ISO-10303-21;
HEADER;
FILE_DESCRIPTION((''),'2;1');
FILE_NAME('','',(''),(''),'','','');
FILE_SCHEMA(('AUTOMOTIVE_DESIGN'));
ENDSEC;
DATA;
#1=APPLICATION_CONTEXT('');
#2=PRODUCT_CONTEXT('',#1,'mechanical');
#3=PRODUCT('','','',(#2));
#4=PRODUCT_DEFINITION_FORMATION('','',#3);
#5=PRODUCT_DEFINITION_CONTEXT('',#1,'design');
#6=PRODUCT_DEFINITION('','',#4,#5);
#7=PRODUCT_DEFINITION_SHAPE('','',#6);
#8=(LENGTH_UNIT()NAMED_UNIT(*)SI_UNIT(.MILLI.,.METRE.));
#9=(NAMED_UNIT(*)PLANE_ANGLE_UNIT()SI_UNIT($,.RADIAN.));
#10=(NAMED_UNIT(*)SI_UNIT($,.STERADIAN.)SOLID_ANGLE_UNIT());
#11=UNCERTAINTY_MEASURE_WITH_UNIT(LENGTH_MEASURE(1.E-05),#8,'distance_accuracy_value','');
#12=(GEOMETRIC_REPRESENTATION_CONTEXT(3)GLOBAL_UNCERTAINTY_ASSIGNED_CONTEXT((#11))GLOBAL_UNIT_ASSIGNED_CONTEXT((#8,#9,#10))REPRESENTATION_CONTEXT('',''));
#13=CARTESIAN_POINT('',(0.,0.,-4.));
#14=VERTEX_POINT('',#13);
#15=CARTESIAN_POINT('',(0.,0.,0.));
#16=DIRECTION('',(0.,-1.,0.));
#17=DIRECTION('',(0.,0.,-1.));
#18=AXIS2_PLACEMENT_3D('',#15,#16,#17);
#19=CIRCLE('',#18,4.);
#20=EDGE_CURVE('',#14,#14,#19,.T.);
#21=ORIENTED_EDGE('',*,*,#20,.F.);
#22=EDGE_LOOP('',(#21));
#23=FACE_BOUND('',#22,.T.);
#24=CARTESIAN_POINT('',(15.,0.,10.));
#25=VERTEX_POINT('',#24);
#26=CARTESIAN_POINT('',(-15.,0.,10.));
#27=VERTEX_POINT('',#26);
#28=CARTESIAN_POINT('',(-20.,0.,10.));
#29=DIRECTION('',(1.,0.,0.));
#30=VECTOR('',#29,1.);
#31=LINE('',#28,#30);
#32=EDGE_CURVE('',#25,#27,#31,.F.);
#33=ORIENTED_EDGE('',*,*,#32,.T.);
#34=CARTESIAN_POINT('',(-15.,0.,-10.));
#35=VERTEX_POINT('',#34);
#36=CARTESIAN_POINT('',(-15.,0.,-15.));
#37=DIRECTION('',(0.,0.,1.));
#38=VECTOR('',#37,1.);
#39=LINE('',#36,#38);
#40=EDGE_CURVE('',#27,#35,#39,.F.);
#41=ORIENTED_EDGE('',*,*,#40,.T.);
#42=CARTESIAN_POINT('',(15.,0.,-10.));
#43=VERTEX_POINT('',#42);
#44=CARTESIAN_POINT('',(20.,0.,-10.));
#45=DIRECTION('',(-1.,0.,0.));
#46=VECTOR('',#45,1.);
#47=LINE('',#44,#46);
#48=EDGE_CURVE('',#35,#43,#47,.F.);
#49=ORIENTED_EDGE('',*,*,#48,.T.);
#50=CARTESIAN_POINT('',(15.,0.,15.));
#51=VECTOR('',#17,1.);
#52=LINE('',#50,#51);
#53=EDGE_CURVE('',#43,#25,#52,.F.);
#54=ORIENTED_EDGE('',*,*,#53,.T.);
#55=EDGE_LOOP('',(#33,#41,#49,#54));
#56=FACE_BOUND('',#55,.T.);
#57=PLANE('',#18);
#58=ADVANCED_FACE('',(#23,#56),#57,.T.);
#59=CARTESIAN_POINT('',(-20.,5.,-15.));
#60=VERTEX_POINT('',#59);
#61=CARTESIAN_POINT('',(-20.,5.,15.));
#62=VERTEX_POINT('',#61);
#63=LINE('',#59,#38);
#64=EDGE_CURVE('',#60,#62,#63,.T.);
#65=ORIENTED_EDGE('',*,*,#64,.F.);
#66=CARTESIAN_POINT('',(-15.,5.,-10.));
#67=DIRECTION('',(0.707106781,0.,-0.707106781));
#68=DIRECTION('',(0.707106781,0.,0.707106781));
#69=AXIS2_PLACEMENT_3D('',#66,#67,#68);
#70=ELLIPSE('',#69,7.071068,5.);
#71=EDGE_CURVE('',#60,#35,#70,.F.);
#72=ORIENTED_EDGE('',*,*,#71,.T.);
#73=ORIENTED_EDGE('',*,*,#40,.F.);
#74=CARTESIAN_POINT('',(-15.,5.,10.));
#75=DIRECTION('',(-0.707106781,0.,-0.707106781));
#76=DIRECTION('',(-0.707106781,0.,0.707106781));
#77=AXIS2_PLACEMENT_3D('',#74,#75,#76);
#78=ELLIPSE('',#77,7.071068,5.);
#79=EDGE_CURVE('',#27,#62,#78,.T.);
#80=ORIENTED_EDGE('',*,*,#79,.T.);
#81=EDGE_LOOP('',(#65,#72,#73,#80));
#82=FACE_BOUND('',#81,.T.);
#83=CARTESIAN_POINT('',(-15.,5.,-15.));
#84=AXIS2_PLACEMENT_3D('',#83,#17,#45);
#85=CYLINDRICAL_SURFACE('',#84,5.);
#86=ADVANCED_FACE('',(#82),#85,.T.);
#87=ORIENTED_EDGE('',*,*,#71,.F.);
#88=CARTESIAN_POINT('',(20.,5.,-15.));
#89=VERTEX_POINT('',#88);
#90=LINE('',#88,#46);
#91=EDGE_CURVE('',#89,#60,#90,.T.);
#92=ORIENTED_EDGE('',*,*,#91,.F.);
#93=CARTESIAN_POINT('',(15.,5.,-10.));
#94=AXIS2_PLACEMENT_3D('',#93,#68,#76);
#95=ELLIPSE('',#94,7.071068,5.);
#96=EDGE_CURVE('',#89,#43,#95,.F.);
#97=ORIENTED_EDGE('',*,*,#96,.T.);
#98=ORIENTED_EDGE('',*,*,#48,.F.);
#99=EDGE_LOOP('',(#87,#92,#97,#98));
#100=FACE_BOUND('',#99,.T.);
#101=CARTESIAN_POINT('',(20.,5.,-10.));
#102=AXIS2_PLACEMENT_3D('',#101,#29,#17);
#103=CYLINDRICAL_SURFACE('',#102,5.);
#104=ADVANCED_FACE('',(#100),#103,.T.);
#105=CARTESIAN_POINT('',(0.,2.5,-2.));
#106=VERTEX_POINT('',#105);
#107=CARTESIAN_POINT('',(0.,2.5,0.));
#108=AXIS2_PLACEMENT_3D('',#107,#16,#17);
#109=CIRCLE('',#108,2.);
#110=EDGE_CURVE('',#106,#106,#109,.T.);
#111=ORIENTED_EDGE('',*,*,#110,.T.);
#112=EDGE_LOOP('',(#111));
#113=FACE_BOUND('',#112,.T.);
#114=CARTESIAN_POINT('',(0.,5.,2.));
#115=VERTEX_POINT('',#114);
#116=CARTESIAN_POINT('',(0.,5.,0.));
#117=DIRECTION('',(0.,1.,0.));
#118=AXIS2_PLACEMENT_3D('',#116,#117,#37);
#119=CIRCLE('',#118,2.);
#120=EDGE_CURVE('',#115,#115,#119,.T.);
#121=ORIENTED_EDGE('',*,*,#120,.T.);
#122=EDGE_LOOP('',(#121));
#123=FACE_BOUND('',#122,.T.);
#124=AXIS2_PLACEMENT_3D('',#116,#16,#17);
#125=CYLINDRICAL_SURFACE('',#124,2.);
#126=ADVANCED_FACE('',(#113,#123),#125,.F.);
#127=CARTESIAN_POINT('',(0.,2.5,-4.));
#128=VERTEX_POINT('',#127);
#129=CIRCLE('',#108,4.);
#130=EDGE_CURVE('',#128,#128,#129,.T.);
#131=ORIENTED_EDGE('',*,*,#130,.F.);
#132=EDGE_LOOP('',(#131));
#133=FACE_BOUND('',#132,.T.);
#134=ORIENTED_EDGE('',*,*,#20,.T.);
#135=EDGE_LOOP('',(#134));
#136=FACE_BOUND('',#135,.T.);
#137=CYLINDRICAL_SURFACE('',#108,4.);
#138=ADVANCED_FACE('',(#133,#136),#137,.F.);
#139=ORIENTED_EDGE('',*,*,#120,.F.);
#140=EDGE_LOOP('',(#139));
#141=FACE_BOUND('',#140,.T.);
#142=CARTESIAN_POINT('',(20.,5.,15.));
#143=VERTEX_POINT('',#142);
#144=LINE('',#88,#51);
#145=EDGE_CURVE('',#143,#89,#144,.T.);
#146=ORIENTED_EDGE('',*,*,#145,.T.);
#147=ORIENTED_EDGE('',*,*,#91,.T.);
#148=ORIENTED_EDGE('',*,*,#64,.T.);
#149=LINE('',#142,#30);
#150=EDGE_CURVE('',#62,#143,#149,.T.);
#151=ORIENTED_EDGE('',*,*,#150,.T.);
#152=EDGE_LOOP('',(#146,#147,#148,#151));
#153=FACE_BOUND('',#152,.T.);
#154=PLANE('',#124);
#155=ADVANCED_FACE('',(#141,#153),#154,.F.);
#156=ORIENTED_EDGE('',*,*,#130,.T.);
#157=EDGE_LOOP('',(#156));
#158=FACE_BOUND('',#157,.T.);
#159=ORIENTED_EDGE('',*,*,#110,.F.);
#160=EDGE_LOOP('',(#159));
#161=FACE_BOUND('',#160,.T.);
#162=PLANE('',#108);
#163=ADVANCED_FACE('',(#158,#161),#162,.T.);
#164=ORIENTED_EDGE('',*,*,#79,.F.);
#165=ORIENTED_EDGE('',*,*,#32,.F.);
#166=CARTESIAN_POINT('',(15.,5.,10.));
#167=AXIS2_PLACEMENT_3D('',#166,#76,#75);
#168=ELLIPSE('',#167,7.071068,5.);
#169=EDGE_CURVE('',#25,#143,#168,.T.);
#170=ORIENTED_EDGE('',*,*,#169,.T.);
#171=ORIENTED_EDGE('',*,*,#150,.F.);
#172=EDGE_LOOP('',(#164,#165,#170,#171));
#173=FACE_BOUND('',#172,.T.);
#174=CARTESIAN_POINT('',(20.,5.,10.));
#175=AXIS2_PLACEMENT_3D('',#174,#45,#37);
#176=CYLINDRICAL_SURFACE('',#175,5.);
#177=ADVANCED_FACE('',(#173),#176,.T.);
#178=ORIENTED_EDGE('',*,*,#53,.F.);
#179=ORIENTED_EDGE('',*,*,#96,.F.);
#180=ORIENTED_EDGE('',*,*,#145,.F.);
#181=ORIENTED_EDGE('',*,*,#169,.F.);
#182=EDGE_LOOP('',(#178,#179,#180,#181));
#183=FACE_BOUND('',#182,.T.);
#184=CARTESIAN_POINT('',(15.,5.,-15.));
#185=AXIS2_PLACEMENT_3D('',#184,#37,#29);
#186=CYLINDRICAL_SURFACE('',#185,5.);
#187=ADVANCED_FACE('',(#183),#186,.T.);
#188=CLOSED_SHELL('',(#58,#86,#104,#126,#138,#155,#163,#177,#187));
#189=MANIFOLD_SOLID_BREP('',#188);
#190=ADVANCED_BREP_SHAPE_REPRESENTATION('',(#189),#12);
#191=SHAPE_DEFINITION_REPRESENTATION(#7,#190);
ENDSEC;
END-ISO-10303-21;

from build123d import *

# Parameters (mm, degrees)
ESQUISSE1_W     = 40
ESQUISSE1_H     = 30
ESQUISSE1_R     = 2
BASE_DEPTH      = 5
EXT_R           = 5
ESQUISSE2_R     = 4
ACCES_VIS_DEPTH = 2.5


with BuildPart() as part:
    # Esquisse1 → BASE (new body)
    with BuildSketch(Plane(origin=(0, 0, 0), x_dir=(1, 0, 0), z_dir=(0, 1, 0))):
        Rectangle(ESQUISSE1_W, ESQUISSE1_H)
        with Locations(Location((0, 0, 0), (0, 0, 270))):
            Circle(ESQUISSE1_R, mode=Mode.SUBTRACT)
    extrude(amount=BASE_DEPTH)

    # EXT
    ext_edges = [part.edges().sort_by_distance(p)[0] for p in [
        (-20, 0, 0),
        (0, 0, -15),
        (20, 0, 0),
        (0, 0, 15),
    ]]
    fillet(ext_edges, radius=EXT_R - 0.0001)  # a hair under: the kernel refuses the full size

    # Esquisse2 → ACCES VIS (cut)
    with BuildSketch(Plane(origin=(0, 0, 0), x_dir=(-1, 0, 0), z_dir=(0, -1, 0))):
        with Locations(Location((0, 0, 0), (0, 0, 90))):
            Circle(ESQUISSE2_R)
    extrude(amount=-ACCES_VIS_DEPTH, mode=Mode.SUBTRACT)


solid = part.part
